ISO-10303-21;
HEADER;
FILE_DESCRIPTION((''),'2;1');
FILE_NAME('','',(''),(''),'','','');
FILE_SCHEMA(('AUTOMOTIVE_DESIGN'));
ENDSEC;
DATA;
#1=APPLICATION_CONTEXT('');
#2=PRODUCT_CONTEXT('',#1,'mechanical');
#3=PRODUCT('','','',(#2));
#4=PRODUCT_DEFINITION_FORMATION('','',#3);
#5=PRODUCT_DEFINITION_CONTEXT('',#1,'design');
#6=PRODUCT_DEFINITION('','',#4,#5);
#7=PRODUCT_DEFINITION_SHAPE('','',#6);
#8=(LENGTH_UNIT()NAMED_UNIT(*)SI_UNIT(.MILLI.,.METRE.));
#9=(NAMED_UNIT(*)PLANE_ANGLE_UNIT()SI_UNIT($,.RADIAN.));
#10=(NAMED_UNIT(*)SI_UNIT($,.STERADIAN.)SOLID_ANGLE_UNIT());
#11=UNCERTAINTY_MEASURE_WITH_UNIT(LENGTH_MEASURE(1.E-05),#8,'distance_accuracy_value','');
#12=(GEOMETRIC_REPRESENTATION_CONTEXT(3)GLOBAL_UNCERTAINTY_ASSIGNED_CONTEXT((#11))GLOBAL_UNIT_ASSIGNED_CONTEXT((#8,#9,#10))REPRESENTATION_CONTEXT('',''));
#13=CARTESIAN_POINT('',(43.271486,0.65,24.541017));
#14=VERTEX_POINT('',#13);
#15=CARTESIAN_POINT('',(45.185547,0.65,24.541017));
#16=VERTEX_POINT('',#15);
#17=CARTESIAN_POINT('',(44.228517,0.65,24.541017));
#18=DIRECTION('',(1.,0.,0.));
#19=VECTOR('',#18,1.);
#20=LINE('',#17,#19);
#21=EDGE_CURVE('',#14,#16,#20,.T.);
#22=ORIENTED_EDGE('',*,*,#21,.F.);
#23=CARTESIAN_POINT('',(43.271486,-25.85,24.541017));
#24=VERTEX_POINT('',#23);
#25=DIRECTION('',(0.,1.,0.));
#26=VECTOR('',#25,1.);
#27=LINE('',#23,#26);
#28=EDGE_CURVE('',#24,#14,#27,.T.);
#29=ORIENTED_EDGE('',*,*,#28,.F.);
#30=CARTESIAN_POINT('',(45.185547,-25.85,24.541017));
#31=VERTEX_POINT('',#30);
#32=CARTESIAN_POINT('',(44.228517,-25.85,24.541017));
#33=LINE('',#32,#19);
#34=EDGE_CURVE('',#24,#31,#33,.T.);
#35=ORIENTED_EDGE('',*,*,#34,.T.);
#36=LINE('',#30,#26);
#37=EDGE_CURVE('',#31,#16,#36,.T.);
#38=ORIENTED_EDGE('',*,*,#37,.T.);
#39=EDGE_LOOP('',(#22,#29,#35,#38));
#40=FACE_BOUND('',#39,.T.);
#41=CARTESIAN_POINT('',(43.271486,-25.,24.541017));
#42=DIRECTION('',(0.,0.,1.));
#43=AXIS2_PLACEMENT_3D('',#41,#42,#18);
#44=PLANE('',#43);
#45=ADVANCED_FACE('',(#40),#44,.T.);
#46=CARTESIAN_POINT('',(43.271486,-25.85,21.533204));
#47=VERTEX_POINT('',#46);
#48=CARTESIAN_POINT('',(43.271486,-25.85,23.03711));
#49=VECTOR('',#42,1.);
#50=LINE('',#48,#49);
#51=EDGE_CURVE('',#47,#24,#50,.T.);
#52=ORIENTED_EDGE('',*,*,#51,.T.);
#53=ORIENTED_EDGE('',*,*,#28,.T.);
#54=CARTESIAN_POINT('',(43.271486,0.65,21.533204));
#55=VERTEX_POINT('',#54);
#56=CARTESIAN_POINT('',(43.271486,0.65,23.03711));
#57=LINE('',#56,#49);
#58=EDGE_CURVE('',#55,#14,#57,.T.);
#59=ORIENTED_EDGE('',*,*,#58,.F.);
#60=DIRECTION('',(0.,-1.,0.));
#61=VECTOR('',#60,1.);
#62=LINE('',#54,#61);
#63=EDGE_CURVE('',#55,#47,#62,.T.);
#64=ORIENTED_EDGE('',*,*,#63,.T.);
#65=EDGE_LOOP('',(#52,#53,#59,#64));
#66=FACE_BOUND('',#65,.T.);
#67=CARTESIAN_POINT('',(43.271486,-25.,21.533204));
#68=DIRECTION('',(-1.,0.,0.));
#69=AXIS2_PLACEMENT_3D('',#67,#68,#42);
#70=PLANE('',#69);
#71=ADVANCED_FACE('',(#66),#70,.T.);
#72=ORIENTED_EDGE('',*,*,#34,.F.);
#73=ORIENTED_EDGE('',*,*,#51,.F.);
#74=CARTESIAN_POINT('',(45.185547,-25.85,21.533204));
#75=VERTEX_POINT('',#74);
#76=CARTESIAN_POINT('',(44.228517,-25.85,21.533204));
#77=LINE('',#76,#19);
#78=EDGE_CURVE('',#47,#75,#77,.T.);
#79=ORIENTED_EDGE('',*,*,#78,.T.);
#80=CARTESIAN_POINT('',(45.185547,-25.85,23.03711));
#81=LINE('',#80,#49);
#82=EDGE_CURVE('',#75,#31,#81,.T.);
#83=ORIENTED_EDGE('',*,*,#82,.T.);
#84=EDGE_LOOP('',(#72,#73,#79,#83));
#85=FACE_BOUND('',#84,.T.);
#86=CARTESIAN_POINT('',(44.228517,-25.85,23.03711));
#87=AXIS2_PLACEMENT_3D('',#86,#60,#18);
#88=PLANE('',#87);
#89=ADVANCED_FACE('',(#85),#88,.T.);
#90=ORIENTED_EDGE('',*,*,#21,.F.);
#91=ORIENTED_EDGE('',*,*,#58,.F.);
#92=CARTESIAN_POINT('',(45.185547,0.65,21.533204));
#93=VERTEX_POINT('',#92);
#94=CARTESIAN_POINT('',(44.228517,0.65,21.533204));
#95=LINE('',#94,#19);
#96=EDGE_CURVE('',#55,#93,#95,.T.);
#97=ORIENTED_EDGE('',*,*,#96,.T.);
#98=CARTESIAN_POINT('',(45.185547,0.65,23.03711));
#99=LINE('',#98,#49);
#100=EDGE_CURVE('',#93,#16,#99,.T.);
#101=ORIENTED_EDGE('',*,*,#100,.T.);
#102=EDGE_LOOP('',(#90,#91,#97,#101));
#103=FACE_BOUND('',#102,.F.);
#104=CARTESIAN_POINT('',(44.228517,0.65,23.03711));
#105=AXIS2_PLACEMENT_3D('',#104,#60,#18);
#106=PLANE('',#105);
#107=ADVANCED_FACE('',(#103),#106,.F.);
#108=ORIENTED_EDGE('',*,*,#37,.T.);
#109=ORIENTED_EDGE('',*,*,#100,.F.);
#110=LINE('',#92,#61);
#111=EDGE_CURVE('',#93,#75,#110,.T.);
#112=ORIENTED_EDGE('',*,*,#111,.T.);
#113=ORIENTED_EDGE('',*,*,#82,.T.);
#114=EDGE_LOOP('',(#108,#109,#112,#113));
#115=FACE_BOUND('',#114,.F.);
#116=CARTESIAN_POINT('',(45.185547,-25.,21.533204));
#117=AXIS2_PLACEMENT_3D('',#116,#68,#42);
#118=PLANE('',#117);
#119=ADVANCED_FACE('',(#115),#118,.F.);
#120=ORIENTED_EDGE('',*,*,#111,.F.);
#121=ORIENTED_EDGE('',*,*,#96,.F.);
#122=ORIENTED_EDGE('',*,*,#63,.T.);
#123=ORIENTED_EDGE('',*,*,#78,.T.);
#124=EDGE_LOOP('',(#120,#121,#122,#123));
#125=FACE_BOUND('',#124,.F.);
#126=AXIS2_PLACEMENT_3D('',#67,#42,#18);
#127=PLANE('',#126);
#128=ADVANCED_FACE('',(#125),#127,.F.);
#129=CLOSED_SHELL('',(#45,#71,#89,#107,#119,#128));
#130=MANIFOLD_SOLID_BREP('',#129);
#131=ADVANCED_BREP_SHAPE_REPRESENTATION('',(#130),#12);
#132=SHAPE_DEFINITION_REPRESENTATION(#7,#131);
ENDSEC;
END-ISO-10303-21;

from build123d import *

# Parameters (mm, degrees)
F2_W     = 1.9140616059
F2_H     = 3.0078124255
F3_DEPTH = 25
F4_DEPTH = 0.65
F5_DEPTH = 0.85


# Not quite as in the source:
# - the program builds the solid bodies; features that only make, move or delete a surface that nothing else refers to are left out


with BuildPart() as f3:
    # F2 (on Front) → F3 (new body)
    with BuildSketch(Plane.XZ):
        with Locations((44.2285165191, 23.0371104553)):
            Rectangle(F2_W, F2_H)
    extrude(amount=F3_DEPTH)

    # F4 (add): a face of the model
    f4_faces = [f3.faces().sort_by_distance(p)[0] for p in [
        (44.2285165191, 0, 23.0371104553),
    ]]
    extrude(f4_faces, amount=F4_DEPTH)

    # F5 (add): a face of the model
    f5_faces = [f3.faces().sort_by_distance(p)[0] for p in [
        (44.2285165191, -25, 23.0371104553),
    ]]
    extrude(f5_faces, amount=F5_DEPTH)


solid = f3.part
